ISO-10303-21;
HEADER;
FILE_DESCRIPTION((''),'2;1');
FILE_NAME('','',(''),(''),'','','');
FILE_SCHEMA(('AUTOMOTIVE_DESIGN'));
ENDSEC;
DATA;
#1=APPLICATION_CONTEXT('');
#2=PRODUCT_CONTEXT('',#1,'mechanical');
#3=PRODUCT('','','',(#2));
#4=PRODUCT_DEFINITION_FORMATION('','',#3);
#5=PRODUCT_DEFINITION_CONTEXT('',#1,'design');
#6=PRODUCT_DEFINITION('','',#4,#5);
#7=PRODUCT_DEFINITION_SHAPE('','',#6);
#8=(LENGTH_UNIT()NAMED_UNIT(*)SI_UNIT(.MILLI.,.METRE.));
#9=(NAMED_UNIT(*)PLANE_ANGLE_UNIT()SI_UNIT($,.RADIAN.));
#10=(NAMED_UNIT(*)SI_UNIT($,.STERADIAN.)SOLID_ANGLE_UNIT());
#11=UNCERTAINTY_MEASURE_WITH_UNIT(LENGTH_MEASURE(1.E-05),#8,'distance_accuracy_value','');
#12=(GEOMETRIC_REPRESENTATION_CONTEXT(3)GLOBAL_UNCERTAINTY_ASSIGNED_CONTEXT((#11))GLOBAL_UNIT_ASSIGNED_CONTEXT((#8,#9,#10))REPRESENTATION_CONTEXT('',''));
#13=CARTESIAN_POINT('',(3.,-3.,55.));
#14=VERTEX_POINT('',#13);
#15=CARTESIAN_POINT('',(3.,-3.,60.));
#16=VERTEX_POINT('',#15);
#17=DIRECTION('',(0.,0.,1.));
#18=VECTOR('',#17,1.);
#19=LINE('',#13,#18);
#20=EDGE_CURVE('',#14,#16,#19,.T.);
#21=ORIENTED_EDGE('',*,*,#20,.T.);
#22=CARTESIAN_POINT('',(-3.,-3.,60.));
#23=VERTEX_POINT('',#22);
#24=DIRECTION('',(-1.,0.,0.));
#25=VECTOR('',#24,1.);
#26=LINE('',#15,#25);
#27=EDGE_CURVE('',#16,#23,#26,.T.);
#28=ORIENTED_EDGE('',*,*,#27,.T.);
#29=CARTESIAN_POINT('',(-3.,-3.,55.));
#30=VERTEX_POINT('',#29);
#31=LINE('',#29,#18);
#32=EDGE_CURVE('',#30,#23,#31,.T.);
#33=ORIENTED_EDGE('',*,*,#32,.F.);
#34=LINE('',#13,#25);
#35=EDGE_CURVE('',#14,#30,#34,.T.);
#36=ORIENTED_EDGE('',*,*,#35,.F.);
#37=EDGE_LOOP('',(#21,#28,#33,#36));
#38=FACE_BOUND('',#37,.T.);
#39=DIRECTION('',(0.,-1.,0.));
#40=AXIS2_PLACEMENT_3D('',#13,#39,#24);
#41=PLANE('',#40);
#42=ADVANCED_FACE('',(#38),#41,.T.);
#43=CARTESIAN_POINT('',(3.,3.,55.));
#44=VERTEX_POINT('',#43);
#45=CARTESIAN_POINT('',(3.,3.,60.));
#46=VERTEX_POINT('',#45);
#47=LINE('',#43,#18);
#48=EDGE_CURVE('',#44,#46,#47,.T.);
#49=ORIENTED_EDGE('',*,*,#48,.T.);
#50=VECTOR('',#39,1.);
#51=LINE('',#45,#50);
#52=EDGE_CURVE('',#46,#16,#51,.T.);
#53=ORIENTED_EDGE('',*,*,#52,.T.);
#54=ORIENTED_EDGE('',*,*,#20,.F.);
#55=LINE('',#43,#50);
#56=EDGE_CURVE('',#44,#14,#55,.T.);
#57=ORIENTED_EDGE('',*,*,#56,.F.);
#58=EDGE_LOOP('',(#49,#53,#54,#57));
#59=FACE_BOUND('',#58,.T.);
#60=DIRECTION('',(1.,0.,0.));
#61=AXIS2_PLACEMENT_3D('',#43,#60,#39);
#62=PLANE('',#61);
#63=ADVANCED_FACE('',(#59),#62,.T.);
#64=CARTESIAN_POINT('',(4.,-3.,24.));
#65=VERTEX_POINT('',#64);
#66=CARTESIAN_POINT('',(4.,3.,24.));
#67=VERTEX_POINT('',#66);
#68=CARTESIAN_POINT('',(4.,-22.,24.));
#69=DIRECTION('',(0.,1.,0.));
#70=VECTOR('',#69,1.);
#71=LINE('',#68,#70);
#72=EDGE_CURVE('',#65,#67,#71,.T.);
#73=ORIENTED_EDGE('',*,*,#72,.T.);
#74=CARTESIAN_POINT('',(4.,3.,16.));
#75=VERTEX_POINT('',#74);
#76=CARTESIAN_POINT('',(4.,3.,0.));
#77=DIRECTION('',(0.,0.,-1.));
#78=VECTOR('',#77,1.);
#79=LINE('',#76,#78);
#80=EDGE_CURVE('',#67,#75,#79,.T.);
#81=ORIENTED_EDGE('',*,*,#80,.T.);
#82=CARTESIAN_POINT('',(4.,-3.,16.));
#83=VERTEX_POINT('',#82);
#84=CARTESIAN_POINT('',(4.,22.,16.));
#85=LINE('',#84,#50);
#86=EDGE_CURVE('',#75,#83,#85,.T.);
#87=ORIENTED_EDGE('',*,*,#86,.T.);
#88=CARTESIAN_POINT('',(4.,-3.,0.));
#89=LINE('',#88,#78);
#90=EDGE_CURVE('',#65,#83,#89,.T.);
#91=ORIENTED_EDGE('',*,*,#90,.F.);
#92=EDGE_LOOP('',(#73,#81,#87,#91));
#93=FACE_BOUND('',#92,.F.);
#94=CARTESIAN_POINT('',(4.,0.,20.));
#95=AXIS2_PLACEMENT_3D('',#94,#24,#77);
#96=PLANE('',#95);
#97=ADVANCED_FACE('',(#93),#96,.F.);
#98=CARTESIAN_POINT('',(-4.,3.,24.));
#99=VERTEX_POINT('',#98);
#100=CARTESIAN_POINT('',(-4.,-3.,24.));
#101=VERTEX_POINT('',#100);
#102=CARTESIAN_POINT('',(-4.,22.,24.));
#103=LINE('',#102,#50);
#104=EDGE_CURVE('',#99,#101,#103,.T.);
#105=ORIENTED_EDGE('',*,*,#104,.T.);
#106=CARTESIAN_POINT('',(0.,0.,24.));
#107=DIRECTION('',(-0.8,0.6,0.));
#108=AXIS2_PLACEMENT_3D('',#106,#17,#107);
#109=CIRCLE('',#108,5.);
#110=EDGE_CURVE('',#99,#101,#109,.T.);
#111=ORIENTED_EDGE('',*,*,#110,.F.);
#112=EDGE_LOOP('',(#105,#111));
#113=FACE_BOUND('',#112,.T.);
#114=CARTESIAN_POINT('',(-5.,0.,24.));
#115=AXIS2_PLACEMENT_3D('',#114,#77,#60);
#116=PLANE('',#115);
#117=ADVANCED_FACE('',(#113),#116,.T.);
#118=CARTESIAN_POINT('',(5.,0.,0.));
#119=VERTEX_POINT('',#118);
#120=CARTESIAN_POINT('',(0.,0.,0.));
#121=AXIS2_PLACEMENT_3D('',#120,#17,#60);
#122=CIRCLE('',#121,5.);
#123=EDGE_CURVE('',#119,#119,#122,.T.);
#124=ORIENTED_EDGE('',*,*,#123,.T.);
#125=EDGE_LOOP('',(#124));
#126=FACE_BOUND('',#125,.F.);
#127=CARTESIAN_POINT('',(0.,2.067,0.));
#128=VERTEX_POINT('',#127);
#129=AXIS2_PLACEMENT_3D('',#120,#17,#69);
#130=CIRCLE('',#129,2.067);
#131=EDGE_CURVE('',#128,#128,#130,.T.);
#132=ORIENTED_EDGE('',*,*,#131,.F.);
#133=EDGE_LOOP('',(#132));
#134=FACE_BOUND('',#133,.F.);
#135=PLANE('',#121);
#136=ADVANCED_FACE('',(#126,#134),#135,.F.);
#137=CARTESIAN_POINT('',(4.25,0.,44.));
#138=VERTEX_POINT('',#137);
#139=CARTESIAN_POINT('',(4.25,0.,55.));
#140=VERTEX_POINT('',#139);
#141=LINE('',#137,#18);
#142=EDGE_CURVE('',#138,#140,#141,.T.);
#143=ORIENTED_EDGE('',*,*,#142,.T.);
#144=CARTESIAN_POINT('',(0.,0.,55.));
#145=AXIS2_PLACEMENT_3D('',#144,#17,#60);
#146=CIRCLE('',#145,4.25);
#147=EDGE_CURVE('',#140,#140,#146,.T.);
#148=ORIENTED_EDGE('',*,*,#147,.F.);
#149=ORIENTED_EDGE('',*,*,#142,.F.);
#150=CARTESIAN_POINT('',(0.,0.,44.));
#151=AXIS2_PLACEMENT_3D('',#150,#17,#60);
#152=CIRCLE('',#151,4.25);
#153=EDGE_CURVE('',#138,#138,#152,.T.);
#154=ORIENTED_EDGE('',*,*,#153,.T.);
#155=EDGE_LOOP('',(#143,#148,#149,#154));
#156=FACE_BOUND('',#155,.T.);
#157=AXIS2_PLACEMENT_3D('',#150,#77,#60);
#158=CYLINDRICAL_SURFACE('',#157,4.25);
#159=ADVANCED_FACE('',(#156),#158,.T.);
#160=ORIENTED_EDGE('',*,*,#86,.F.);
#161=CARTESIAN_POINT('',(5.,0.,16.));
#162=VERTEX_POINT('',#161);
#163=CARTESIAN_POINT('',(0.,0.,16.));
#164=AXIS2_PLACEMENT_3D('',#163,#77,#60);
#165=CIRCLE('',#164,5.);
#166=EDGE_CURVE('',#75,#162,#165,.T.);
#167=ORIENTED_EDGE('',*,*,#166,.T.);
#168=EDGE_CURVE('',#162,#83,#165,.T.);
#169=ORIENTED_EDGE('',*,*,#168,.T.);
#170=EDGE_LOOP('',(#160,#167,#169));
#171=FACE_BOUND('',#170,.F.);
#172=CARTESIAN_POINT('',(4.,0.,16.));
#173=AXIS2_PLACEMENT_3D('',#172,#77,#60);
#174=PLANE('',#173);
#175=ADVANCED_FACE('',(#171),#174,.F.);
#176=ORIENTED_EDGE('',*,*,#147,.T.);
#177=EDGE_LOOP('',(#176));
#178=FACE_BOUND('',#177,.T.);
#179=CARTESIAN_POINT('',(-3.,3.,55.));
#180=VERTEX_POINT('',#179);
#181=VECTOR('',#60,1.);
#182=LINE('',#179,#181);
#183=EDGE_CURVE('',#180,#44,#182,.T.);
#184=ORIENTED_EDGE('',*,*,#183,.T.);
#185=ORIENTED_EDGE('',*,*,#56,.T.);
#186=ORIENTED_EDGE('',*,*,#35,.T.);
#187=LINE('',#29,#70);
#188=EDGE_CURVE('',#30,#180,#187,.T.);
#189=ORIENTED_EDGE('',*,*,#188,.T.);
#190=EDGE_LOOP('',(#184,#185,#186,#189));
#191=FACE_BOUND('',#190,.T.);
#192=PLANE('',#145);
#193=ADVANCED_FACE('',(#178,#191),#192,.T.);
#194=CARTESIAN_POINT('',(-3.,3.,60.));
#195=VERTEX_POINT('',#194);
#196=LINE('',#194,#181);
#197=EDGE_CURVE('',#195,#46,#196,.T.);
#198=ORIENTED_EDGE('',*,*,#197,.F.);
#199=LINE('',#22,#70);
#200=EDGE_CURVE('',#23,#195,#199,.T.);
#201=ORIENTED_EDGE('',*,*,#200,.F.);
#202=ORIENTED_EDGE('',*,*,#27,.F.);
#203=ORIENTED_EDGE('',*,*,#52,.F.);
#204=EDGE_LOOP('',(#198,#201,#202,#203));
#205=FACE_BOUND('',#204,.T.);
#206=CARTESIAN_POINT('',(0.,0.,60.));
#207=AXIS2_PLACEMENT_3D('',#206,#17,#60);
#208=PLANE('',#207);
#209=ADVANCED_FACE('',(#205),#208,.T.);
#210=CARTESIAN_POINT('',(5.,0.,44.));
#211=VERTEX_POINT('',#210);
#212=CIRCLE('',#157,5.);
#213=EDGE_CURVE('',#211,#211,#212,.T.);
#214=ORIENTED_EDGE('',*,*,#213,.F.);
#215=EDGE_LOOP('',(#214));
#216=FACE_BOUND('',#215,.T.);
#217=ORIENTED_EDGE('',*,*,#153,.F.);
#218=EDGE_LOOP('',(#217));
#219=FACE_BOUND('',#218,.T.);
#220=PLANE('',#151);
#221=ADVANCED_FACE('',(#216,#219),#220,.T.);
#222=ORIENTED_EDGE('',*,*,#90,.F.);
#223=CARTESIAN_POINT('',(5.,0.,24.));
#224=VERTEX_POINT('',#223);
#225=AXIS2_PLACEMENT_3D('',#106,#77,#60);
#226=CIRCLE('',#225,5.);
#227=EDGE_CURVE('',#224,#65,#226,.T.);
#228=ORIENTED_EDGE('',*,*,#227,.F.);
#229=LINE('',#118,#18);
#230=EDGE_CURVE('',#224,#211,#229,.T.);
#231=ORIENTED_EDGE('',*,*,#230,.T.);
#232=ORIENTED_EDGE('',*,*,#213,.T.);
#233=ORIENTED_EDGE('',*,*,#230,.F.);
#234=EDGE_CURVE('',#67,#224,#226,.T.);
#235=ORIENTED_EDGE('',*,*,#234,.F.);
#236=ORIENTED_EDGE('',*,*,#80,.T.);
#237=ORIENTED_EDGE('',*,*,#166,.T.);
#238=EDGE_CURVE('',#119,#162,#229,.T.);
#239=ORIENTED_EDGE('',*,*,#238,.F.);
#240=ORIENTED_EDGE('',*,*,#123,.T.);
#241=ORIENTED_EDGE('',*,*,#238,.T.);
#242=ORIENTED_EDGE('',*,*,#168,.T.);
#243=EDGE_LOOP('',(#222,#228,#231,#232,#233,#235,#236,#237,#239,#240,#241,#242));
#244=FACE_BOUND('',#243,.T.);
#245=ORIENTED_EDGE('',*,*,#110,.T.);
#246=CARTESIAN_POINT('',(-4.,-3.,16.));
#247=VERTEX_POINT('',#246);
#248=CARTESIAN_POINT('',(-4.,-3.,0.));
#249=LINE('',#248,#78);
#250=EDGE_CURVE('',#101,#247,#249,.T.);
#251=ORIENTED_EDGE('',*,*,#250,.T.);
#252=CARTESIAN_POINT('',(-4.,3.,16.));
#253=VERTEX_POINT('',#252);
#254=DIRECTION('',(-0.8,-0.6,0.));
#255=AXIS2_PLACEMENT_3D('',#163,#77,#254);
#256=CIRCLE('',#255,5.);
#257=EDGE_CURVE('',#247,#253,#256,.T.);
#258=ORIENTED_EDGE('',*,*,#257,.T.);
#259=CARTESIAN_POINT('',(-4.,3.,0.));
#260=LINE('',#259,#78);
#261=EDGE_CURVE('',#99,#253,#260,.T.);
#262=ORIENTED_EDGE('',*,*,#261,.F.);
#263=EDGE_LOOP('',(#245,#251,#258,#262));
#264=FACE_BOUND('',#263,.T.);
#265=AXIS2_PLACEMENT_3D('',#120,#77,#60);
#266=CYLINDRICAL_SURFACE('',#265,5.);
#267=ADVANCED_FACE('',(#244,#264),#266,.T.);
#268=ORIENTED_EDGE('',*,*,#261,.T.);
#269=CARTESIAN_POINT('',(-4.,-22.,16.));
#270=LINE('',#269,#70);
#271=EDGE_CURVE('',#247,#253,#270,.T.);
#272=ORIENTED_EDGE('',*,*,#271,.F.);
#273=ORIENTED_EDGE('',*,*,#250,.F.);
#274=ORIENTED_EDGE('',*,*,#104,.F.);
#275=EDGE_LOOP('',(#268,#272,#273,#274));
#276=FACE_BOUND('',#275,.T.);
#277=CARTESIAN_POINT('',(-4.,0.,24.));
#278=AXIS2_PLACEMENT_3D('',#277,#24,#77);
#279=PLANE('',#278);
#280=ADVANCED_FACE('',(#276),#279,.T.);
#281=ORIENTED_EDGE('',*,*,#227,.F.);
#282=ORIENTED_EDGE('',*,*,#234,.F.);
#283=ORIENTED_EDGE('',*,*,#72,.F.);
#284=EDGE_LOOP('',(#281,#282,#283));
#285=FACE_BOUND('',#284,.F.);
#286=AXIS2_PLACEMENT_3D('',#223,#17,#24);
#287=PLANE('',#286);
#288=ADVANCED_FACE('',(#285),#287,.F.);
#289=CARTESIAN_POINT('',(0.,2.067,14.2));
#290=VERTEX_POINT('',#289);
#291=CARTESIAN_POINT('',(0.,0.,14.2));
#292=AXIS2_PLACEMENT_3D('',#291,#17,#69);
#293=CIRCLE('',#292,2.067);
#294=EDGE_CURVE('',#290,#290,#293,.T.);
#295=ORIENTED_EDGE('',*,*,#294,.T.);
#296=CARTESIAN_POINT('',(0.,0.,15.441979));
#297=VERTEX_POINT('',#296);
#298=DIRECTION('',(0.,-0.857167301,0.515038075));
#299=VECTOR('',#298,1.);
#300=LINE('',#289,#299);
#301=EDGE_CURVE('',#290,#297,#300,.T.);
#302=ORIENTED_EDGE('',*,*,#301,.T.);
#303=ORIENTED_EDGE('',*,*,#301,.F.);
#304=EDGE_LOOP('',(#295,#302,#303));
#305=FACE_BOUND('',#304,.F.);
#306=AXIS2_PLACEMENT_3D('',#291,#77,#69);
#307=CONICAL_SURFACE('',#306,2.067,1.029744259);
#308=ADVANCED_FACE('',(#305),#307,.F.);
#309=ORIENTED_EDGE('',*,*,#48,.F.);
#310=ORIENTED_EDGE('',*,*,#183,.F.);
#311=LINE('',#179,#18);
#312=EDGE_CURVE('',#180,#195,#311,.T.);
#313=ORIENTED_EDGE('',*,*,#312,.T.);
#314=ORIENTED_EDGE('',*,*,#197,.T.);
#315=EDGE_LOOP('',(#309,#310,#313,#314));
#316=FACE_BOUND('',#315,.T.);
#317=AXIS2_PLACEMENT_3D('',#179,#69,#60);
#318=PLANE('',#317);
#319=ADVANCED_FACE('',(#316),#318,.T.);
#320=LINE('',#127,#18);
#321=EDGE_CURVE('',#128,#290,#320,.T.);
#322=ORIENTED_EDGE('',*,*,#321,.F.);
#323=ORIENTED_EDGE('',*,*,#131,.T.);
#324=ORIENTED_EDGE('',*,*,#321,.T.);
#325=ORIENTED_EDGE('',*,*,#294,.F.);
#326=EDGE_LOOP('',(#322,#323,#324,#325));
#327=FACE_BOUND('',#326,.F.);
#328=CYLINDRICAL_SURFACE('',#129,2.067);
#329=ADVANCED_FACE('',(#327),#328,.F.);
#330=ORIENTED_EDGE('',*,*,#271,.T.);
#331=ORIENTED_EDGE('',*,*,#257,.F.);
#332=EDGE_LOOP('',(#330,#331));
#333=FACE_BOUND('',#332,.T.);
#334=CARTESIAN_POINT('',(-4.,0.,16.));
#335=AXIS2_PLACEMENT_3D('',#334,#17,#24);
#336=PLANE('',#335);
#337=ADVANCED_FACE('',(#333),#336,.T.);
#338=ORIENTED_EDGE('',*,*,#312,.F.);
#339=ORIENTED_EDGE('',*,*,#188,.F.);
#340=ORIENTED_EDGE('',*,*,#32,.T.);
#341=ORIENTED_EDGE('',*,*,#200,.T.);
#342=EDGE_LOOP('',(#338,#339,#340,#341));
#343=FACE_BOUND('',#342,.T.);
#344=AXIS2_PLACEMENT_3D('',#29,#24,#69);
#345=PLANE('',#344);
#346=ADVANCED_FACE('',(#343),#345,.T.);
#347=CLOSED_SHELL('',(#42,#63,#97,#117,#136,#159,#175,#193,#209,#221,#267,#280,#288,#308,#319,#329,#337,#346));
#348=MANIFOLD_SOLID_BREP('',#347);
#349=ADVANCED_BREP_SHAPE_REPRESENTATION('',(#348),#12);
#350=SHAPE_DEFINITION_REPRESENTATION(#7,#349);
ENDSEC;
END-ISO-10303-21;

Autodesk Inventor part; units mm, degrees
ref_plane "YZ Plane" through (0, 0, 0) normal (1, 0, 0) x (0, 1, 0)
ref_plane "XZ Plane" through (0, 0, 0) normal (0, 1, 0) x (-1, 0, 0)
ref_plane "XY Plane" through (0, 0, 0) normal (0, 0, 1) x (1, 0, 0)
sketch "Skizze1" plane through (0, 0, 0) normal (0, 0, 1) x (1, 0, 0)
  line L0 (-7, 0) -> (7, 0) projected
  line L1 (0, -7) -> (0, 7) projected
  circle A0 centre (0, 0) radius 5
  dimension "d0" = 10
extrude "Extrusion1" add sketch "Skizze1" along normal blind 44
sketch "Skizze2" plane through (0, 0, 44) normal (0, 0, 1) x (1, 0, 0)
  circle A0 centre (0, 0) radius 5 projected
  circle A1 centre (0, 0) radius 4.25
  dimension "d3" = 8.5
extrude "Extrusion2" add sketch "Skizze2" along normal blind 11 contours A1
sketch "Skizze3" plane through (0, 0, 0) normal (0, 0, -1) x (-1, 0, 0)
  circle A0 centre (0, 0) radius 5 projected
hole "Bohrung1" at (0, 0, 0) direction (0, 0, 1) diameter 4.134 depth 14.2 tip angle 118 thread size "M5x0.8" class "6H" standard "ISO Metric profile"
sketch "Skizze4" plane through (0, 0, 55) normal (0, 0, 1) x (1, 0, 0)
  line L0 (3, -3) -> (-3, -3)
  line L1 (-3, -3) -> (-3, 3)
  line L2 (-3, 3) -> (3, 3)
  line L3 (3, 3) -> (3, -3)
  circle A0 centre (0, 0) radius 4.25 projected
  line L4 (3, -3) -> (-3, 3) construction
  line L5 (-3, -3) -> (3, 3) construction
  dimension "d13" = 6
  dimension "d14" = 6
extrude "Extrusion3" add sketch "Skizze4" along normal blind 5 contours L0 L1 L2 L3
sketch "Skizze5" plane through (0, 0, 0) normal (0, 1, 0) x (-1, 0, 0)
  line L0 (0, -12.3) -> (0, 73.8) projected
  line L1 (7, 0) -> (-7, 0) projected
  line L2 (8.228, 20) -> (-9.772, 20)
  line L3 (5, 44) -> (-5, 44) projected
  line L4 (5, 0) -> (-5, 0) projected
  line L5 (5, 0) -> (5, 44) projected
  line L6 (-5, 0) -> (-5, 44) projected
  line L7 (4, 16) -> (5, 16)
  line L8 (5, 16) -> (5, 24)
  line L9 (5, 24) -> (4, 24)
  line L10 (4, 24) -> (4, 16)
  line L11 (4, 16) -> (5, 24) construction
  line L12 (5, 16) -> (4, 24) construction
  line L13 (-4, 16) -> (-5, 16)
  line L14 (-5, 16) -> (-5, 24)
  line L15 (-5, 24) -> (-4, 24)
  line L16 (-4, 24) -> (-4, 16)
  line L17 (-4, 16) -> (-5, 24) construction
  line L18 (-5, 16) -> (-4, 24) construction
  point P0 (0, 0)
  point P1 (4.5, 20)
  point P2 (-4.5, 20)
  dimension "d17" = 8
  dimension "d18" = 8
  dimension "d19" = 20
extrude "Extrusion4" cut sketch "Skizze5" along normal mid plane 44 contours L10 L9 L5 L2 | L2 L5 L7 L10 | L16 L13 L6 L2 | L2 L6 L15 L16
equation "\"d13\" = d14"
properties part number "24_0497_009"
